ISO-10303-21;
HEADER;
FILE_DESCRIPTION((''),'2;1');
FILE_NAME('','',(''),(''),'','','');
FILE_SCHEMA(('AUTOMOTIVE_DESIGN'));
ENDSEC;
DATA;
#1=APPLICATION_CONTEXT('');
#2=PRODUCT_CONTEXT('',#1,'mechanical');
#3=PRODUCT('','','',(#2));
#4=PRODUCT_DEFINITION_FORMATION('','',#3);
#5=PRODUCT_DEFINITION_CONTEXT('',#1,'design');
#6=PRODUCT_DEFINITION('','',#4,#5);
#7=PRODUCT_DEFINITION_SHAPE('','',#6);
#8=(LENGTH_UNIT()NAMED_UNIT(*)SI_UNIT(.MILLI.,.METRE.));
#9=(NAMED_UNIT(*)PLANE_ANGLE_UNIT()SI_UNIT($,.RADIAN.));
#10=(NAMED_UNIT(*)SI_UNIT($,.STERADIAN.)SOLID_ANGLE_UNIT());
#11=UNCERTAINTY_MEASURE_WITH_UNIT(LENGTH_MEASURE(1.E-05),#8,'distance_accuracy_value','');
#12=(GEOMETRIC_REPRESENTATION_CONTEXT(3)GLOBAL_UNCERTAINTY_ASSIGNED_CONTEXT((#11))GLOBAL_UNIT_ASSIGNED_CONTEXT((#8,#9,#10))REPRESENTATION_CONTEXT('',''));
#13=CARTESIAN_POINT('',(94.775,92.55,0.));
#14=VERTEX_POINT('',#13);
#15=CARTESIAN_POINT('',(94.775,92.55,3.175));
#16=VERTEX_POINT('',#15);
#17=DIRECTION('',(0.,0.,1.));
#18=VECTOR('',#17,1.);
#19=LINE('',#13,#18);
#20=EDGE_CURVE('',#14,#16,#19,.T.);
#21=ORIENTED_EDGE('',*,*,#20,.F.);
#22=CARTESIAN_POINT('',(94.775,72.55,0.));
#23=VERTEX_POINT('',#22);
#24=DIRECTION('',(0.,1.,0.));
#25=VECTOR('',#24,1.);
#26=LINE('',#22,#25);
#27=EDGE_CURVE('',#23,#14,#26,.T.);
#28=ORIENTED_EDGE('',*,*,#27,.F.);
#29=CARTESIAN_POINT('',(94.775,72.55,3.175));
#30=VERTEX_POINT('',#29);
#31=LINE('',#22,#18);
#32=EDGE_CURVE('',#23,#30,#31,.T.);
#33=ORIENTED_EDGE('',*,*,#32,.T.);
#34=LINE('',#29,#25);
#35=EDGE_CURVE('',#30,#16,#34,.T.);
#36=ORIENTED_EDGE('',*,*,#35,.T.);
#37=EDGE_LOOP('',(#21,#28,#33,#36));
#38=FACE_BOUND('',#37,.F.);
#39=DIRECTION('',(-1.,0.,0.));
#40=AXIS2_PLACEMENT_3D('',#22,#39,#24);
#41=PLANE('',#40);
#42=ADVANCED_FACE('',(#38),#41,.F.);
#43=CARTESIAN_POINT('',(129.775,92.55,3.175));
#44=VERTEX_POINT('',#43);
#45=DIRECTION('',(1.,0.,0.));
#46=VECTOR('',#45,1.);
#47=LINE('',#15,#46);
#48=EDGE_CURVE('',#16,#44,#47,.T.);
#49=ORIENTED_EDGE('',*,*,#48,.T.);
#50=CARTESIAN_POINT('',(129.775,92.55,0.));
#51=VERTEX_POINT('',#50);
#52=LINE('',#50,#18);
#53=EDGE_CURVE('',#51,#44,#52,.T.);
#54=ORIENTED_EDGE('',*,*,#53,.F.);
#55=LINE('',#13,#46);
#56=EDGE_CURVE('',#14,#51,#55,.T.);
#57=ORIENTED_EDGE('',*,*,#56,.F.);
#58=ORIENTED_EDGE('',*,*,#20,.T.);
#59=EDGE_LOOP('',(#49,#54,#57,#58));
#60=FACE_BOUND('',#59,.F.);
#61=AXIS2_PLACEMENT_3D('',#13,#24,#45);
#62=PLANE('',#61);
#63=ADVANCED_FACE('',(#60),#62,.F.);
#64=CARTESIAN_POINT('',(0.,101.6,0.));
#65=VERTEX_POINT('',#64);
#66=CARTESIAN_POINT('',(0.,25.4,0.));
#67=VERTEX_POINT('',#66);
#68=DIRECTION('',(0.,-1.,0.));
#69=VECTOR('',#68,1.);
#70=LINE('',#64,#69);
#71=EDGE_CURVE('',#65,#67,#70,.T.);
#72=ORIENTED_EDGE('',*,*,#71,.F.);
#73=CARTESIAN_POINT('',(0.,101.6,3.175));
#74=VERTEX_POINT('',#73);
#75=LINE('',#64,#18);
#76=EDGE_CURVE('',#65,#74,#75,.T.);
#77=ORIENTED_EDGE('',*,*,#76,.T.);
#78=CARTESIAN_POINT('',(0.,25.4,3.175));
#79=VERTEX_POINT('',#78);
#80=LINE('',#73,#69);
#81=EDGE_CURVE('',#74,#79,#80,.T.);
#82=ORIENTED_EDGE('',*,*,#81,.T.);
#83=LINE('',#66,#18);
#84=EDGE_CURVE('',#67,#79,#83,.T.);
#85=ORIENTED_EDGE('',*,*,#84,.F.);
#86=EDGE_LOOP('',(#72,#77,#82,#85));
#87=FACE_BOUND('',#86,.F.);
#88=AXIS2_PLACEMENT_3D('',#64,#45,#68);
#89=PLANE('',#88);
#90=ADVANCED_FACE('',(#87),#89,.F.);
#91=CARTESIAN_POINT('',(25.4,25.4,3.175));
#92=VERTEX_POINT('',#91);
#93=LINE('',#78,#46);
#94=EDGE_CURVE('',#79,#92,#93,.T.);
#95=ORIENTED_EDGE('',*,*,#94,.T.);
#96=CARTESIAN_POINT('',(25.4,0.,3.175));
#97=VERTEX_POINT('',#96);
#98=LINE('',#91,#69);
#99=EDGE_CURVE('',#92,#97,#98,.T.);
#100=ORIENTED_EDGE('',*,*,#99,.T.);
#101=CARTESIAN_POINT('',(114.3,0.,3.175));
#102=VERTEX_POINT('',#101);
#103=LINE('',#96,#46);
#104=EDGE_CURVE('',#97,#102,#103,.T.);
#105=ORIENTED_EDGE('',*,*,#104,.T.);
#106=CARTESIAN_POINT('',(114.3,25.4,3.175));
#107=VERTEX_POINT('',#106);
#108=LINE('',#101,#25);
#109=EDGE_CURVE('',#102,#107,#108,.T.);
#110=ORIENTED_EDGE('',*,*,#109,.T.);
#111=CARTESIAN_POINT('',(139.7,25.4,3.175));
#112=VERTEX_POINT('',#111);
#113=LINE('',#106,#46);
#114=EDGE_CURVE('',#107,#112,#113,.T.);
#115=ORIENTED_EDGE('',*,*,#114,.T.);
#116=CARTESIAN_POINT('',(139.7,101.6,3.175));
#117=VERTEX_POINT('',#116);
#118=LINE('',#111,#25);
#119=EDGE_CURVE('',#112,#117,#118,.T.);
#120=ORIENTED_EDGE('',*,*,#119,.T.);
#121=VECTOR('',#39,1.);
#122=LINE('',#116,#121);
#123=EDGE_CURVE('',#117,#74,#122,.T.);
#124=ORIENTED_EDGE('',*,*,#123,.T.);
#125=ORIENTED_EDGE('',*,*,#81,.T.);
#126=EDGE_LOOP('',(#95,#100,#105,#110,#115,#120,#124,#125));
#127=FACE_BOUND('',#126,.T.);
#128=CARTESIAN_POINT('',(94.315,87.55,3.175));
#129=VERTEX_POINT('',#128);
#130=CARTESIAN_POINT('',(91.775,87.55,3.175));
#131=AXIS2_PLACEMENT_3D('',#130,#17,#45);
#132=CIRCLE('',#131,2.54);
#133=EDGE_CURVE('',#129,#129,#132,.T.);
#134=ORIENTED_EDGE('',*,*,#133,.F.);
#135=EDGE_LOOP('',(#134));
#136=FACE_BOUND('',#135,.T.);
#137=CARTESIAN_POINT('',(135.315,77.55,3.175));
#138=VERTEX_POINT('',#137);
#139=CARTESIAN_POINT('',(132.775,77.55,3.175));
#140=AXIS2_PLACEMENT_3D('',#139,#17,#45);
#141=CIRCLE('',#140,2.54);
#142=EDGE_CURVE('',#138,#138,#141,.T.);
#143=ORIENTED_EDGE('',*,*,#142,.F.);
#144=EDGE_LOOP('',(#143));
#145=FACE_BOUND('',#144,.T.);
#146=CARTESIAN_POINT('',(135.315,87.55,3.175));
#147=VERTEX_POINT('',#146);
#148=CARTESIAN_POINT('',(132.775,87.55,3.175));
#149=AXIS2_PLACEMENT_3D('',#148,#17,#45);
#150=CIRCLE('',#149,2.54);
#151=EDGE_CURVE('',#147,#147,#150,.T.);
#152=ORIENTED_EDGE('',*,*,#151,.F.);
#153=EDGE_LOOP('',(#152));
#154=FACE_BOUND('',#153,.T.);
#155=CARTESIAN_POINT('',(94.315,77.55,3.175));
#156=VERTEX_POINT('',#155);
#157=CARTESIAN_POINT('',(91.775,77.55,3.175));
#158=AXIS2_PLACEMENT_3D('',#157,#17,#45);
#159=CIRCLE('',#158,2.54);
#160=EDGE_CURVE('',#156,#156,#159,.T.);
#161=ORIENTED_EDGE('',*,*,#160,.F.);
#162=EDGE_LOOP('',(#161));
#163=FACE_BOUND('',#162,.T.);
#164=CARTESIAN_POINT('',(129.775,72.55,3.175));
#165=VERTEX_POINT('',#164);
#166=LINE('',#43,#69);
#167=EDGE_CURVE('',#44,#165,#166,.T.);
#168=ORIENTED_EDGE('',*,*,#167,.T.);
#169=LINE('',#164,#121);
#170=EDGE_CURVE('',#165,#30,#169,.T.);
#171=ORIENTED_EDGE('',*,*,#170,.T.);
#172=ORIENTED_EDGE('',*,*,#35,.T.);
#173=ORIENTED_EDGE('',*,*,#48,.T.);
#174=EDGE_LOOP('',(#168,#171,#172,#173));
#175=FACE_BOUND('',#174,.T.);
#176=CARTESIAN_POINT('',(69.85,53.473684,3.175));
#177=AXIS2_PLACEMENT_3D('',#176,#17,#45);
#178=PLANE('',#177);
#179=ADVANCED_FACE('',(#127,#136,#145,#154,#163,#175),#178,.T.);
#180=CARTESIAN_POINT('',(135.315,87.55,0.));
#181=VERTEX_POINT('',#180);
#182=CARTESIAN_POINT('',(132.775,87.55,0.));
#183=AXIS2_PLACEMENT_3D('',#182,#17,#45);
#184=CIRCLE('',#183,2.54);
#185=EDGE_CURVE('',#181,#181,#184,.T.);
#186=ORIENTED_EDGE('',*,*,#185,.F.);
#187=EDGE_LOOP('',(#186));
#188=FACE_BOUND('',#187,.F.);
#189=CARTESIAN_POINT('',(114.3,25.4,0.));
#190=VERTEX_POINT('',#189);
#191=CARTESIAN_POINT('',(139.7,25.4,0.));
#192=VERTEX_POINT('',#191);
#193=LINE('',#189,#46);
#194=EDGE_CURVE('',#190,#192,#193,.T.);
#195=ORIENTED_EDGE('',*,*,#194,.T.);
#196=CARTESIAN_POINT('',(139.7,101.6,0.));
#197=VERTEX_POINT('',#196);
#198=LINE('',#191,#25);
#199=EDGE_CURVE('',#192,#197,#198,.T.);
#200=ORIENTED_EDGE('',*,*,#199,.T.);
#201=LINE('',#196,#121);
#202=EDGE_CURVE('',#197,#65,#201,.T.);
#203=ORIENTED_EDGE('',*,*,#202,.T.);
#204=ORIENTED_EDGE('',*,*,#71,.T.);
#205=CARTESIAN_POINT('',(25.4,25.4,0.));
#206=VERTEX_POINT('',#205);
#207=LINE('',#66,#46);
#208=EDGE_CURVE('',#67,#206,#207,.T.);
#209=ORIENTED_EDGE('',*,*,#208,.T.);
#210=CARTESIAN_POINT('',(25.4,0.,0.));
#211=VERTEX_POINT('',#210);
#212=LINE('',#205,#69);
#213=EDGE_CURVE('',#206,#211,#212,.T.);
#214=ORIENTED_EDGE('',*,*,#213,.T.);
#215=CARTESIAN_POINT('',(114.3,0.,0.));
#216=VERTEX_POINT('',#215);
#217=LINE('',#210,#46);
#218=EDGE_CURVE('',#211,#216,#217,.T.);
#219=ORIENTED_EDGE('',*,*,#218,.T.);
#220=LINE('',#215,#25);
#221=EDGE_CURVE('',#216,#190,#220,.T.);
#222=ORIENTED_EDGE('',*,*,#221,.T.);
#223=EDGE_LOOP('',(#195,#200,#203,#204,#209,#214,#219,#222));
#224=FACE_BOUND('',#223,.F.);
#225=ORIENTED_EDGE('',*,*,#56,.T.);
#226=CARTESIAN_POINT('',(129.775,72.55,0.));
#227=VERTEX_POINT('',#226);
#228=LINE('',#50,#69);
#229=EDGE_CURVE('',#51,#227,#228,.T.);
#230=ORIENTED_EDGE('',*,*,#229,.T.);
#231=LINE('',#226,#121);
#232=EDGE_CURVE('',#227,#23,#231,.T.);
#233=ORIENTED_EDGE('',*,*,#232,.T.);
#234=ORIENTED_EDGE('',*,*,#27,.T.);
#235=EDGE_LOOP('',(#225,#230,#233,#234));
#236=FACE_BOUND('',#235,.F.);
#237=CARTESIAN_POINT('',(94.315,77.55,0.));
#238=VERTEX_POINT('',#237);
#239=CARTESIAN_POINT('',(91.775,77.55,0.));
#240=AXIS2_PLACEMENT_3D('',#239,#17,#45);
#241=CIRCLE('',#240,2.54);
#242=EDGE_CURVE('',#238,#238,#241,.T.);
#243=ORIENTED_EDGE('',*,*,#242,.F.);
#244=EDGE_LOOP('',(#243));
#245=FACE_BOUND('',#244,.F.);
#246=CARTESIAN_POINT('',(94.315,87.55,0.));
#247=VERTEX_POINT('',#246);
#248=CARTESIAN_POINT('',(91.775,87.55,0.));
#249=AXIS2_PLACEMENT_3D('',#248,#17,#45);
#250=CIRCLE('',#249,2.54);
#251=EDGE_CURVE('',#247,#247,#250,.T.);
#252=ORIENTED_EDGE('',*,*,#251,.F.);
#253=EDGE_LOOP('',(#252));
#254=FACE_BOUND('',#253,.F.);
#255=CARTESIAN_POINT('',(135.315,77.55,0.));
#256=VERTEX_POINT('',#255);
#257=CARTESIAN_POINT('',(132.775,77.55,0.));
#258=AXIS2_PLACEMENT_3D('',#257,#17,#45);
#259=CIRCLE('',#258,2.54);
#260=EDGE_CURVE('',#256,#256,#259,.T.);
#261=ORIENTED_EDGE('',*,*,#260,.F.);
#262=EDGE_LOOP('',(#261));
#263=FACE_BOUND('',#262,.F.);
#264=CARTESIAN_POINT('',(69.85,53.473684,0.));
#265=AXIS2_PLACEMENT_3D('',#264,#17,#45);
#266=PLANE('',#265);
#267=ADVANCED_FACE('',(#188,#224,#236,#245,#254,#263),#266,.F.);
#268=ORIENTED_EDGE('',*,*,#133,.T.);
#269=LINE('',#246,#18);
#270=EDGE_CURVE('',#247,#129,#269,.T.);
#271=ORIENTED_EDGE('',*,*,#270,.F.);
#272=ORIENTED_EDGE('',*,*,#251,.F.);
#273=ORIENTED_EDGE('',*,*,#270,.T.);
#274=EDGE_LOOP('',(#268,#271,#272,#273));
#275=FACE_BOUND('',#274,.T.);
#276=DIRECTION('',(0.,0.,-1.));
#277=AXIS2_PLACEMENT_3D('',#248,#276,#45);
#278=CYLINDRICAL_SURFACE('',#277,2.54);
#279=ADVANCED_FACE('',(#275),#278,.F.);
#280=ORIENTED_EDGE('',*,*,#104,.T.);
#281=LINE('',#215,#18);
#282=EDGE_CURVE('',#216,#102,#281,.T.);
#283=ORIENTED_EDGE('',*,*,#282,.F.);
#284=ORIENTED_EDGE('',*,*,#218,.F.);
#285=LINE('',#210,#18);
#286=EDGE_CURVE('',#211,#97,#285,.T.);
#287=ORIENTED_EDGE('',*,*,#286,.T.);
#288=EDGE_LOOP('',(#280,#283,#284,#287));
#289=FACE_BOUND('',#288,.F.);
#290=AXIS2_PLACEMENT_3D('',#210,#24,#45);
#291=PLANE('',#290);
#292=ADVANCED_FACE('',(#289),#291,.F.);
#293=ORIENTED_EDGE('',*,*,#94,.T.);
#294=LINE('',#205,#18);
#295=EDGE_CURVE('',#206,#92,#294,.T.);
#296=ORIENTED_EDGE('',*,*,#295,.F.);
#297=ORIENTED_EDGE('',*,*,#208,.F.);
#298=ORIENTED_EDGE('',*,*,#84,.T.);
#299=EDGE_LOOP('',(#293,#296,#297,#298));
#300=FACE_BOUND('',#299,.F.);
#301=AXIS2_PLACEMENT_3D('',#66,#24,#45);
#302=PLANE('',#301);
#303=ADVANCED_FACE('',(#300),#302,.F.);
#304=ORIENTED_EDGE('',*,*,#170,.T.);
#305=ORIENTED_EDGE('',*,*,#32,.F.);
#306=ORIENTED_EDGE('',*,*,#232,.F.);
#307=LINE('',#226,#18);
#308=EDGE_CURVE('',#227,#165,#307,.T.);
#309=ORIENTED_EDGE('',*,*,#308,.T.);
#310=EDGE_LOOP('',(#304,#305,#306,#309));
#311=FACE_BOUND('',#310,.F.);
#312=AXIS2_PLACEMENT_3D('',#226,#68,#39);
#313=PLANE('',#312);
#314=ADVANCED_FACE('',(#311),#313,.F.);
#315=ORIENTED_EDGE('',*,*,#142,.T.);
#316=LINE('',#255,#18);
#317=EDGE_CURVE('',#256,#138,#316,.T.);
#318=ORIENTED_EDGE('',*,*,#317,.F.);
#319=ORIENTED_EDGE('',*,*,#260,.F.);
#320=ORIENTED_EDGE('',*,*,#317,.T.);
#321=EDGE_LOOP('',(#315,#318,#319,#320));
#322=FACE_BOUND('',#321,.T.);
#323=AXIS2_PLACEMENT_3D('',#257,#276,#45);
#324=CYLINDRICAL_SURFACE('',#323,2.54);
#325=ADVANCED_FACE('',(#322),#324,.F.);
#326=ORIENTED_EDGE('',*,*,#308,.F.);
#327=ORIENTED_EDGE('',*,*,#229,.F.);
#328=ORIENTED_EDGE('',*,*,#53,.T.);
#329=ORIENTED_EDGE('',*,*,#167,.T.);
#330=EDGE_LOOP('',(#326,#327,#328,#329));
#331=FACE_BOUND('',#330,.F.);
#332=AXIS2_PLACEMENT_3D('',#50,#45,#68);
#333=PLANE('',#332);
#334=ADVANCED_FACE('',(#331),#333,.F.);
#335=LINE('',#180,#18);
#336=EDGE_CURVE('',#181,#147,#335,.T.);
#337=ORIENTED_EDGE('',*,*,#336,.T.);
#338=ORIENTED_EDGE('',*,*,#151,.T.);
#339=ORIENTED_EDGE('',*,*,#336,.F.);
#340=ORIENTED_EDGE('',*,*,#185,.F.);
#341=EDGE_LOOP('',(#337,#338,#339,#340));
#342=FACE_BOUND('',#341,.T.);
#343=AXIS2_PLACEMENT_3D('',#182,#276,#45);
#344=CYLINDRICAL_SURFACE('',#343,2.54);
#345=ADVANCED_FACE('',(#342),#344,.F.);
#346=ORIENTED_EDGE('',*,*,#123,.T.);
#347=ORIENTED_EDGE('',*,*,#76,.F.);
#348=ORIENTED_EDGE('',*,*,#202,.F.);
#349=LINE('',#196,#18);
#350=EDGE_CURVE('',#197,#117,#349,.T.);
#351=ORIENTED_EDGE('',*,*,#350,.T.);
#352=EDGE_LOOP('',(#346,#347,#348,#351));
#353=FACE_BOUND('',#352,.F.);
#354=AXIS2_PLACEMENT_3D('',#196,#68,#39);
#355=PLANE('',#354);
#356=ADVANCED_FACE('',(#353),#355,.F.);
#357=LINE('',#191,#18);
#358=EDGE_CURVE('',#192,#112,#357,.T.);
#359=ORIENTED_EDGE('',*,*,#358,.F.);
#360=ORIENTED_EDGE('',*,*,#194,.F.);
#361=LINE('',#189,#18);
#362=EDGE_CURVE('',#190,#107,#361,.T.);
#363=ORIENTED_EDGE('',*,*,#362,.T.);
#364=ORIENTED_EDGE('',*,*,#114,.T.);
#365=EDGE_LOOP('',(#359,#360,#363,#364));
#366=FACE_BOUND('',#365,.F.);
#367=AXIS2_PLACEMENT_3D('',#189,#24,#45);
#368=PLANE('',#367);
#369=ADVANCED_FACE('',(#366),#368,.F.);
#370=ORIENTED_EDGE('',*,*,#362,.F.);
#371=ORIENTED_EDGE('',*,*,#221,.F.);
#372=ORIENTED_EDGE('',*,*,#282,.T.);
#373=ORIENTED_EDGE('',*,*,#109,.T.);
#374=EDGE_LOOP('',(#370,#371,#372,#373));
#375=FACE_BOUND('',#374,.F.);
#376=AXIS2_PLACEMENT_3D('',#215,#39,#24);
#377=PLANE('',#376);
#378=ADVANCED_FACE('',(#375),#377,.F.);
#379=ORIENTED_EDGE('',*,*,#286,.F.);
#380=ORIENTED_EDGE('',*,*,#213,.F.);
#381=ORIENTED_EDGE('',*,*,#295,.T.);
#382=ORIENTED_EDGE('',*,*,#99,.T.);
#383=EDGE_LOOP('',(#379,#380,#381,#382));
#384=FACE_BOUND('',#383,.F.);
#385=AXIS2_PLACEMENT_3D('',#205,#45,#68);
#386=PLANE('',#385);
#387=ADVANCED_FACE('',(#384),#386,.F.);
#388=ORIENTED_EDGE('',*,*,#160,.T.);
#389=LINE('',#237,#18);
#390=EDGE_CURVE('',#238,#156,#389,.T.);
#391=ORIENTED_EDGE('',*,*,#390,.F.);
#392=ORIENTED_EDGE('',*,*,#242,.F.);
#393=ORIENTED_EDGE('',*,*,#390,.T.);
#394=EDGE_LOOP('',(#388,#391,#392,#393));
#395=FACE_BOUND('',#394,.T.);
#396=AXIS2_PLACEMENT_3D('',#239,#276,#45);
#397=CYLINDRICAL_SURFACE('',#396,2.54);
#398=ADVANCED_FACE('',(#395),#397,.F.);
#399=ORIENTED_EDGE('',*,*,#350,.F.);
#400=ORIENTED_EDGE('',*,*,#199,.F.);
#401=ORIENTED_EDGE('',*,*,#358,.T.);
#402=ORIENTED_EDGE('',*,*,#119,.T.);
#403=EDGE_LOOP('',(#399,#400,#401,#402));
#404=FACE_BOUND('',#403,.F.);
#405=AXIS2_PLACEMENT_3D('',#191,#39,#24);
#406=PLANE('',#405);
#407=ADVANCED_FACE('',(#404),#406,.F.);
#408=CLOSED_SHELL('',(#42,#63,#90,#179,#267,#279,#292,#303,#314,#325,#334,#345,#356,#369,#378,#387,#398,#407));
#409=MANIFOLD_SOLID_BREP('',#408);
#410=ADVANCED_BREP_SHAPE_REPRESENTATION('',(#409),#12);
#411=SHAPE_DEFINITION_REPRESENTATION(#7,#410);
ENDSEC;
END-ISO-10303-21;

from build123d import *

# Parameters (mm, degrees)
F0_R     = 2.54
F1_DEPTH = 3.175


# Not quite as in the source:
# - a length typed as a fraction of an inch, garbled in the dataset ("3 / 203.2 mm" for 3/8 in), is restored


with BuildPart() as f1:
    # F0 (on Top) → F1 (new body)
    with BuildSketch(Plane.XY):
        Polygon((139.7, 101.6), (0, 101.6), (0, 25.4), (25.4, 25.4), (25.4, 0), (114.3, 0), (114.3, 25.4), (139.7, 25.4), align=None)
        with Locations((91.775, 77.55)):
            Circle(F0_R, mode=Mode.SUBTRACT)
        with Locations((91.775, 87.55)):
            Circle(F0_R, mode=Mode.SUBTRACT)
        Polygon((94.775, 92.55), (104.775, 92.55), (129.775, 92.55), (129.775, 72.55), (104.775, 72.55), (94.775, 72.55), align=None, mode=Mode.SUBTRACT)
        with Locations((132.775, 77.55)):
            Circle(F0_R, mode=Mode.SUBTRACT)
        with Locations((132.775, 87.55)):
            Circle(F0_R, mode=Mode.SUBTRACT)
    extrude(amount=F1_DEPTH)


solid = f1.part
